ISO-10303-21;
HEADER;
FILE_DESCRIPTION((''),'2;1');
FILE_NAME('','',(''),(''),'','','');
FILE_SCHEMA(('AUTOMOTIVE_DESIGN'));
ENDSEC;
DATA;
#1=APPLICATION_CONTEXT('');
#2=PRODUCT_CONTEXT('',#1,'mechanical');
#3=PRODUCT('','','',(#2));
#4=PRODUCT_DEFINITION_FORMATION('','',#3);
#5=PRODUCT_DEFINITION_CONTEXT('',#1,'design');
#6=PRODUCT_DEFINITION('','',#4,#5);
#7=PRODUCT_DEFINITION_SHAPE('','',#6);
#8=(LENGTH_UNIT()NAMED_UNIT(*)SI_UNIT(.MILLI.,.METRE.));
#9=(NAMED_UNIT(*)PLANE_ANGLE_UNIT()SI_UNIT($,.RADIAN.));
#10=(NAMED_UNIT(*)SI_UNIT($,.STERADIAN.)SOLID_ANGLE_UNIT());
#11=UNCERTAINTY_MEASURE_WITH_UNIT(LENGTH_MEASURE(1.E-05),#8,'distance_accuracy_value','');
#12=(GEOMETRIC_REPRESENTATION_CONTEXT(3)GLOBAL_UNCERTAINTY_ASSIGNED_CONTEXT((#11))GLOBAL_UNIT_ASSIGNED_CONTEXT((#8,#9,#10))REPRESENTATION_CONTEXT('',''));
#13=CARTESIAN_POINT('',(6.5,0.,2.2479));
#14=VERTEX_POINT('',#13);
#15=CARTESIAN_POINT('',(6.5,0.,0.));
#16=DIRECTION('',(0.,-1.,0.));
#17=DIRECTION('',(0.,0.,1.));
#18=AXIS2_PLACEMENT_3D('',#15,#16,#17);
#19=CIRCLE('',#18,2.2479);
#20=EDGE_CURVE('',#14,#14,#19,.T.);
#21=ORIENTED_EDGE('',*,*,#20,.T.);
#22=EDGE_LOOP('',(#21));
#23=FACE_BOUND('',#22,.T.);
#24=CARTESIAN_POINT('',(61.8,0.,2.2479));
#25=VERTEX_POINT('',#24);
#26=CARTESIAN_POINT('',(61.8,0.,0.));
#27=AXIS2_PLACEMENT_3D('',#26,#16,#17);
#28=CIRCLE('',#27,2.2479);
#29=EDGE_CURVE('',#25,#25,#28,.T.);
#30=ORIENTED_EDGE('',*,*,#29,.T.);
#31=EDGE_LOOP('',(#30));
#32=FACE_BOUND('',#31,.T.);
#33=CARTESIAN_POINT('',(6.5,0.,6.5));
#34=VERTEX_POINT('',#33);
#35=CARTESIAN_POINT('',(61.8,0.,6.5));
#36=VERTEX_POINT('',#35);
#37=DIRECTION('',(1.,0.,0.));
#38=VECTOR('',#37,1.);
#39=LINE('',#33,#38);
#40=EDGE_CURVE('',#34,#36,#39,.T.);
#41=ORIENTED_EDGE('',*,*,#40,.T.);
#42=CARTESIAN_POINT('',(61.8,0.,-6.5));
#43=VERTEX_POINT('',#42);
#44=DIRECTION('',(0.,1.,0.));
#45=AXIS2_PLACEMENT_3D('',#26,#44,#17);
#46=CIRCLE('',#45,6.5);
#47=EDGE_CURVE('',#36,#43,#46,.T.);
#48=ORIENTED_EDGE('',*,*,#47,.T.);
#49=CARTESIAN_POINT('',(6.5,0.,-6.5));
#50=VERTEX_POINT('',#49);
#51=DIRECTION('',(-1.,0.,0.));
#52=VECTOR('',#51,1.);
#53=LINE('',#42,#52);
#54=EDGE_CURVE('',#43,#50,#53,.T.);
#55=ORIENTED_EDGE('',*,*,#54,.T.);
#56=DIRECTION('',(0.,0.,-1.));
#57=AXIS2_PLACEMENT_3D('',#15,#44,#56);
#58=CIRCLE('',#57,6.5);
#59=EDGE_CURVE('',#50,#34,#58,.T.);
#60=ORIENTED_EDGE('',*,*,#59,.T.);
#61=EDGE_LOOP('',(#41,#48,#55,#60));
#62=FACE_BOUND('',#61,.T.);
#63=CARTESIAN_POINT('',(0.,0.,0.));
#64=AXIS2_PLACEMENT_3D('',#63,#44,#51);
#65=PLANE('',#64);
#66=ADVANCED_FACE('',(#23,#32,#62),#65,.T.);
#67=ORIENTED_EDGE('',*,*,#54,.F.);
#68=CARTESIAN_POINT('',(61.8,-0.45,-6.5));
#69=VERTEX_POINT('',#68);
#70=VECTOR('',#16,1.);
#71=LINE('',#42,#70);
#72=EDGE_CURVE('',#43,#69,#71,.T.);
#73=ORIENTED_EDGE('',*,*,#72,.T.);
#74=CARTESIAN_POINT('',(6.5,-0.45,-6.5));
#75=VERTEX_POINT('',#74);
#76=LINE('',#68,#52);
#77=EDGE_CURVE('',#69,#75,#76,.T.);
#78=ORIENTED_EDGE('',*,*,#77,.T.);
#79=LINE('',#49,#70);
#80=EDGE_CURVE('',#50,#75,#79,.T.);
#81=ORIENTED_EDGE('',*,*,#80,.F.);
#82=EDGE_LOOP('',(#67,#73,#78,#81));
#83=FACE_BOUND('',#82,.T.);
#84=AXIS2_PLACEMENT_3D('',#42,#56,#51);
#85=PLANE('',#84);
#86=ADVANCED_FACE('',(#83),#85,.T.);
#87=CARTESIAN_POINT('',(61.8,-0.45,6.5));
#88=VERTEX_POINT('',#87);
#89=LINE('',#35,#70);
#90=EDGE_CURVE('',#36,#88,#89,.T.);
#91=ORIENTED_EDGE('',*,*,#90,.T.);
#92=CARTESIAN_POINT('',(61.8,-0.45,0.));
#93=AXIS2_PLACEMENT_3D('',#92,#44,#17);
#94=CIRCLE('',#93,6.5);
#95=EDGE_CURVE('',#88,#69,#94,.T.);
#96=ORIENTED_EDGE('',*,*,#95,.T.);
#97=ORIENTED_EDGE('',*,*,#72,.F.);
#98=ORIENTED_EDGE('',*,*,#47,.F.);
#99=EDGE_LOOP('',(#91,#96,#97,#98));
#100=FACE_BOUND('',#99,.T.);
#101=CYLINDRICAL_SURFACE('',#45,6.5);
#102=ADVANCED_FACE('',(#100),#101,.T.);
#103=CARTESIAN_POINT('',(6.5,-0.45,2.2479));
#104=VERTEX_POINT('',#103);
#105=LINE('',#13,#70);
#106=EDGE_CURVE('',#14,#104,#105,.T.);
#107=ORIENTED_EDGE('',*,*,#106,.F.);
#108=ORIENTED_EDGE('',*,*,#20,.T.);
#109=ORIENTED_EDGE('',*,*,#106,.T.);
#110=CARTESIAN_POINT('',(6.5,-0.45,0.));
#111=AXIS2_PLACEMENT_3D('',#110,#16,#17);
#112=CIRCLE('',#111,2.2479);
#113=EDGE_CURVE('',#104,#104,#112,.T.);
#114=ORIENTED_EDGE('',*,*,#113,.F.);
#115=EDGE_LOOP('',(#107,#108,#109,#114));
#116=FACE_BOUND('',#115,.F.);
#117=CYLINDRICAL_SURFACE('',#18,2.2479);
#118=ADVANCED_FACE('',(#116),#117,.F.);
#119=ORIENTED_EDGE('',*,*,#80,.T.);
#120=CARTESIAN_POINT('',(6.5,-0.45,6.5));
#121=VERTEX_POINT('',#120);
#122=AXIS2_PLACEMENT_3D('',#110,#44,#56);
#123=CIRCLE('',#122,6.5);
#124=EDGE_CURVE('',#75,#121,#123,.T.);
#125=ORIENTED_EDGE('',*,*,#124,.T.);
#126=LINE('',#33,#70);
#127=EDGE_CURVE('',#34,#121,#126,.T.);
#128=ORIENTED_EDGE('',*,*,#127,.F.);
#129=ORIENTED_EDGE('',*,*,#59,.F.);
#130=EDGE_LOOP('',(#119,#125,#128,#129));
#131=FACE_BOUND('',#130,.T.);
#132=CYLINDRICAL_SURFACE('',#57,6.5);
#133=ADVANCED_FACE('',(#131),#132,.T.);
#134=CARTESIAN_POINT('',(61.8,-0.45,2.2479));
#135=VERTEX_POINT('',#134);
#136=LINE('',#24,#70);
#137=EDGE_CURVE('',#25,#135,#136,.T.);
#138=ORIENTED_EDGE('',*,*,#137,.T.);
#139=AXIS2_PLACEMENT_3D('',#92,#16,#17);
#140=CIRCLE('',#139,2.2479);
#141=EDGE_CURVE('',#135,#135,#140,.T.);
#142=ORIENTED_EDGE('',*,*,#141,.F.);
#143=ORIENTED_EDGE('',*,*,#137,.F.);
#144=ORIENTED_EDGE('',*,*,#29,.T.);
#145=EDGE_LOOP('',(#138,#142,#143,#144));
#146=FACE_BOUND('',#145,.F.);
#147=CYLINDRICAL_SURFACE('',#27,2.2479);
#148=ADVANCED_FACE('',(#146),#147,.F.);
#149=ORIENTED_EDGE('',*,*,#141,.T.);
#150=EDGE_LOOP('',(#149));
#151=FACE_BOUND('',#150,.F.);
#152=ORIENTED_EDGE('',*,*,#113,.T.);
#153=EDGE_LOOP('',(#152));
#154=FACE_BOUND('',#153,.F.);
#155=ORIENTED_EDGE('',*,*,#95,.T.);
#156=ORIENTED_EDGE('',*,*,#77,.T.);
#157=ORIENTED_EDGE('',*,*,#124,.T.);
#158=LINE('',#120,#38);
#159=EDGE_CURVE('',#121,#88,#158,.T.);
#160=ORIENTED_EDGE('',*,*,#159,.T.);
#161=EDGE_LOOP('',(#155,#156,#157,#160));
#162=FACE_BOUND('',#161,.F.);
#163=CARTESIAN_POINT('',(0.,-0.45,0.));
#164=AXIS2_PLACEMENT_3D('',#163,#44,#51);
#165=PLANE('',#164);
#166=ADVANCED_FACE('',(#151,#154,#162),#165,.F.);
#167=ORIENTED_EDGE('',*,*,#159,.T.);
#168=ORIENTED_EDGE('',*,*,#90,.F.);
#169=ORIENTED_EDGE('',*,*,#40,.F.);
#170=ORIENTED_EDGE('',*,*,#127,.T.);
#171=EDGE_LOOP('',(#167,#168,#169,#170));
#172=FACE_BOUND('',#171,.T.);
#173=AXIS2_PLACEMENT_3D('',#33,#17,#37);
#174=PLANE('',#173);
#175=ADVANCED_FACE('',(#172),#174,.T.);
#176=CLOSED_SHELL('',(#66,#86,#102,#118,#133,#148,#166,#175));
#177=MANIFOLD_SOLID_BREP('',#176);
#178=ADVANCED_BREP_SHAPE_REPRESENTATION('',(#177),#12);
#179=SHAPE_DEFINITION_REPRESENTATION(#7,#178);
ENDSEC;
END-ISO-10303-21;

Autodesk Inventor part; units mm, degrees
ref_plane "YZ Plane" through (0, 0, 0) normal (1, 0, 0) x (0, 1, 0)
ref_plane "XZ Plane" through (0, 0, 0) normal (0, 1, 0) x (-1, 0, 0)
ref_plane "XY Plane" through (0, 0, 0) normal (0, 0, 1) x (1, 0, 0)
sketch "Sketch1" plane through (0, 0, 0) normal (0, 1, 0) x (-1, 0, 0)
  line L0 (0, 0) -> (-68.3, 0) construction
  line L1 (-6.5, 6.5) -> (-61.8, 6.5)
  line L2 (-61.8, -6.5) -> (-6.5, -6.5)
  arc A0 (-6.5, -6.5) -> (-6.5, 6.5) centre (-6.5, 0) ccw
  arc A1 (-61.8, 6.5) -> (-61.8, -6.5) centre (-61.8, 0) ccw
  line L3 (-23.9184, -1.1237) -> (-43.8581, -1.1237) construction
  line L4 (-43.8581, -1.1237) -> (-43.8581, 0.6417) construction
  line L5 (-43.8581, 0.6417) -> (-23.9184, 0.6417) construction
  line L6 (-23.9184, 0.6417) -> (-23.9184, -1.1237) construction
  line L7 (-34.15, -6.5) -> (-34.15, 6.5) construction
  point P0 (-34.15, 0)
  dimension "BendRadius" = 0.45
  dimension "d21" = 68.3
  dimension "d22" = 13
extrude "Plate2" add sketch "Sketch1" against normal blind 0.45
mark "Mark1"
hole "Hole2" at (6.5, 0, 0) at (61.8, 0, 0) direction (0, -1, 0) diameter 4.4958 end through all clearance for "Socket Head Cap Screw" size "M4" standard "Ansi Metric M Profile"
equation "\"BendRadius\" = Thickness"
equation "\"d29\" = Thickness"
equation "\"d23\" = Thickness"
equation "\"BendReliefWidth\" = Thickness"
equation "\"BendReliefDepth\" = 0.5 * Thickness"
equation "\"CornerReliefSize\" = 4 * Thickness"
equation "\"MinimumRemnant\" = 2 * Thickness"
equation "\"TransitionRadius\" = BendRadius"
equation "\"JacobiRadiusSize\" = BendRadius"
equation "\"GapSize\" = Thickness"
equation "\"radius\" = 6"
equation "\"Thickness\" = 0.45"
properties part number "Part16.5mm" material "Steel, Carbon"
